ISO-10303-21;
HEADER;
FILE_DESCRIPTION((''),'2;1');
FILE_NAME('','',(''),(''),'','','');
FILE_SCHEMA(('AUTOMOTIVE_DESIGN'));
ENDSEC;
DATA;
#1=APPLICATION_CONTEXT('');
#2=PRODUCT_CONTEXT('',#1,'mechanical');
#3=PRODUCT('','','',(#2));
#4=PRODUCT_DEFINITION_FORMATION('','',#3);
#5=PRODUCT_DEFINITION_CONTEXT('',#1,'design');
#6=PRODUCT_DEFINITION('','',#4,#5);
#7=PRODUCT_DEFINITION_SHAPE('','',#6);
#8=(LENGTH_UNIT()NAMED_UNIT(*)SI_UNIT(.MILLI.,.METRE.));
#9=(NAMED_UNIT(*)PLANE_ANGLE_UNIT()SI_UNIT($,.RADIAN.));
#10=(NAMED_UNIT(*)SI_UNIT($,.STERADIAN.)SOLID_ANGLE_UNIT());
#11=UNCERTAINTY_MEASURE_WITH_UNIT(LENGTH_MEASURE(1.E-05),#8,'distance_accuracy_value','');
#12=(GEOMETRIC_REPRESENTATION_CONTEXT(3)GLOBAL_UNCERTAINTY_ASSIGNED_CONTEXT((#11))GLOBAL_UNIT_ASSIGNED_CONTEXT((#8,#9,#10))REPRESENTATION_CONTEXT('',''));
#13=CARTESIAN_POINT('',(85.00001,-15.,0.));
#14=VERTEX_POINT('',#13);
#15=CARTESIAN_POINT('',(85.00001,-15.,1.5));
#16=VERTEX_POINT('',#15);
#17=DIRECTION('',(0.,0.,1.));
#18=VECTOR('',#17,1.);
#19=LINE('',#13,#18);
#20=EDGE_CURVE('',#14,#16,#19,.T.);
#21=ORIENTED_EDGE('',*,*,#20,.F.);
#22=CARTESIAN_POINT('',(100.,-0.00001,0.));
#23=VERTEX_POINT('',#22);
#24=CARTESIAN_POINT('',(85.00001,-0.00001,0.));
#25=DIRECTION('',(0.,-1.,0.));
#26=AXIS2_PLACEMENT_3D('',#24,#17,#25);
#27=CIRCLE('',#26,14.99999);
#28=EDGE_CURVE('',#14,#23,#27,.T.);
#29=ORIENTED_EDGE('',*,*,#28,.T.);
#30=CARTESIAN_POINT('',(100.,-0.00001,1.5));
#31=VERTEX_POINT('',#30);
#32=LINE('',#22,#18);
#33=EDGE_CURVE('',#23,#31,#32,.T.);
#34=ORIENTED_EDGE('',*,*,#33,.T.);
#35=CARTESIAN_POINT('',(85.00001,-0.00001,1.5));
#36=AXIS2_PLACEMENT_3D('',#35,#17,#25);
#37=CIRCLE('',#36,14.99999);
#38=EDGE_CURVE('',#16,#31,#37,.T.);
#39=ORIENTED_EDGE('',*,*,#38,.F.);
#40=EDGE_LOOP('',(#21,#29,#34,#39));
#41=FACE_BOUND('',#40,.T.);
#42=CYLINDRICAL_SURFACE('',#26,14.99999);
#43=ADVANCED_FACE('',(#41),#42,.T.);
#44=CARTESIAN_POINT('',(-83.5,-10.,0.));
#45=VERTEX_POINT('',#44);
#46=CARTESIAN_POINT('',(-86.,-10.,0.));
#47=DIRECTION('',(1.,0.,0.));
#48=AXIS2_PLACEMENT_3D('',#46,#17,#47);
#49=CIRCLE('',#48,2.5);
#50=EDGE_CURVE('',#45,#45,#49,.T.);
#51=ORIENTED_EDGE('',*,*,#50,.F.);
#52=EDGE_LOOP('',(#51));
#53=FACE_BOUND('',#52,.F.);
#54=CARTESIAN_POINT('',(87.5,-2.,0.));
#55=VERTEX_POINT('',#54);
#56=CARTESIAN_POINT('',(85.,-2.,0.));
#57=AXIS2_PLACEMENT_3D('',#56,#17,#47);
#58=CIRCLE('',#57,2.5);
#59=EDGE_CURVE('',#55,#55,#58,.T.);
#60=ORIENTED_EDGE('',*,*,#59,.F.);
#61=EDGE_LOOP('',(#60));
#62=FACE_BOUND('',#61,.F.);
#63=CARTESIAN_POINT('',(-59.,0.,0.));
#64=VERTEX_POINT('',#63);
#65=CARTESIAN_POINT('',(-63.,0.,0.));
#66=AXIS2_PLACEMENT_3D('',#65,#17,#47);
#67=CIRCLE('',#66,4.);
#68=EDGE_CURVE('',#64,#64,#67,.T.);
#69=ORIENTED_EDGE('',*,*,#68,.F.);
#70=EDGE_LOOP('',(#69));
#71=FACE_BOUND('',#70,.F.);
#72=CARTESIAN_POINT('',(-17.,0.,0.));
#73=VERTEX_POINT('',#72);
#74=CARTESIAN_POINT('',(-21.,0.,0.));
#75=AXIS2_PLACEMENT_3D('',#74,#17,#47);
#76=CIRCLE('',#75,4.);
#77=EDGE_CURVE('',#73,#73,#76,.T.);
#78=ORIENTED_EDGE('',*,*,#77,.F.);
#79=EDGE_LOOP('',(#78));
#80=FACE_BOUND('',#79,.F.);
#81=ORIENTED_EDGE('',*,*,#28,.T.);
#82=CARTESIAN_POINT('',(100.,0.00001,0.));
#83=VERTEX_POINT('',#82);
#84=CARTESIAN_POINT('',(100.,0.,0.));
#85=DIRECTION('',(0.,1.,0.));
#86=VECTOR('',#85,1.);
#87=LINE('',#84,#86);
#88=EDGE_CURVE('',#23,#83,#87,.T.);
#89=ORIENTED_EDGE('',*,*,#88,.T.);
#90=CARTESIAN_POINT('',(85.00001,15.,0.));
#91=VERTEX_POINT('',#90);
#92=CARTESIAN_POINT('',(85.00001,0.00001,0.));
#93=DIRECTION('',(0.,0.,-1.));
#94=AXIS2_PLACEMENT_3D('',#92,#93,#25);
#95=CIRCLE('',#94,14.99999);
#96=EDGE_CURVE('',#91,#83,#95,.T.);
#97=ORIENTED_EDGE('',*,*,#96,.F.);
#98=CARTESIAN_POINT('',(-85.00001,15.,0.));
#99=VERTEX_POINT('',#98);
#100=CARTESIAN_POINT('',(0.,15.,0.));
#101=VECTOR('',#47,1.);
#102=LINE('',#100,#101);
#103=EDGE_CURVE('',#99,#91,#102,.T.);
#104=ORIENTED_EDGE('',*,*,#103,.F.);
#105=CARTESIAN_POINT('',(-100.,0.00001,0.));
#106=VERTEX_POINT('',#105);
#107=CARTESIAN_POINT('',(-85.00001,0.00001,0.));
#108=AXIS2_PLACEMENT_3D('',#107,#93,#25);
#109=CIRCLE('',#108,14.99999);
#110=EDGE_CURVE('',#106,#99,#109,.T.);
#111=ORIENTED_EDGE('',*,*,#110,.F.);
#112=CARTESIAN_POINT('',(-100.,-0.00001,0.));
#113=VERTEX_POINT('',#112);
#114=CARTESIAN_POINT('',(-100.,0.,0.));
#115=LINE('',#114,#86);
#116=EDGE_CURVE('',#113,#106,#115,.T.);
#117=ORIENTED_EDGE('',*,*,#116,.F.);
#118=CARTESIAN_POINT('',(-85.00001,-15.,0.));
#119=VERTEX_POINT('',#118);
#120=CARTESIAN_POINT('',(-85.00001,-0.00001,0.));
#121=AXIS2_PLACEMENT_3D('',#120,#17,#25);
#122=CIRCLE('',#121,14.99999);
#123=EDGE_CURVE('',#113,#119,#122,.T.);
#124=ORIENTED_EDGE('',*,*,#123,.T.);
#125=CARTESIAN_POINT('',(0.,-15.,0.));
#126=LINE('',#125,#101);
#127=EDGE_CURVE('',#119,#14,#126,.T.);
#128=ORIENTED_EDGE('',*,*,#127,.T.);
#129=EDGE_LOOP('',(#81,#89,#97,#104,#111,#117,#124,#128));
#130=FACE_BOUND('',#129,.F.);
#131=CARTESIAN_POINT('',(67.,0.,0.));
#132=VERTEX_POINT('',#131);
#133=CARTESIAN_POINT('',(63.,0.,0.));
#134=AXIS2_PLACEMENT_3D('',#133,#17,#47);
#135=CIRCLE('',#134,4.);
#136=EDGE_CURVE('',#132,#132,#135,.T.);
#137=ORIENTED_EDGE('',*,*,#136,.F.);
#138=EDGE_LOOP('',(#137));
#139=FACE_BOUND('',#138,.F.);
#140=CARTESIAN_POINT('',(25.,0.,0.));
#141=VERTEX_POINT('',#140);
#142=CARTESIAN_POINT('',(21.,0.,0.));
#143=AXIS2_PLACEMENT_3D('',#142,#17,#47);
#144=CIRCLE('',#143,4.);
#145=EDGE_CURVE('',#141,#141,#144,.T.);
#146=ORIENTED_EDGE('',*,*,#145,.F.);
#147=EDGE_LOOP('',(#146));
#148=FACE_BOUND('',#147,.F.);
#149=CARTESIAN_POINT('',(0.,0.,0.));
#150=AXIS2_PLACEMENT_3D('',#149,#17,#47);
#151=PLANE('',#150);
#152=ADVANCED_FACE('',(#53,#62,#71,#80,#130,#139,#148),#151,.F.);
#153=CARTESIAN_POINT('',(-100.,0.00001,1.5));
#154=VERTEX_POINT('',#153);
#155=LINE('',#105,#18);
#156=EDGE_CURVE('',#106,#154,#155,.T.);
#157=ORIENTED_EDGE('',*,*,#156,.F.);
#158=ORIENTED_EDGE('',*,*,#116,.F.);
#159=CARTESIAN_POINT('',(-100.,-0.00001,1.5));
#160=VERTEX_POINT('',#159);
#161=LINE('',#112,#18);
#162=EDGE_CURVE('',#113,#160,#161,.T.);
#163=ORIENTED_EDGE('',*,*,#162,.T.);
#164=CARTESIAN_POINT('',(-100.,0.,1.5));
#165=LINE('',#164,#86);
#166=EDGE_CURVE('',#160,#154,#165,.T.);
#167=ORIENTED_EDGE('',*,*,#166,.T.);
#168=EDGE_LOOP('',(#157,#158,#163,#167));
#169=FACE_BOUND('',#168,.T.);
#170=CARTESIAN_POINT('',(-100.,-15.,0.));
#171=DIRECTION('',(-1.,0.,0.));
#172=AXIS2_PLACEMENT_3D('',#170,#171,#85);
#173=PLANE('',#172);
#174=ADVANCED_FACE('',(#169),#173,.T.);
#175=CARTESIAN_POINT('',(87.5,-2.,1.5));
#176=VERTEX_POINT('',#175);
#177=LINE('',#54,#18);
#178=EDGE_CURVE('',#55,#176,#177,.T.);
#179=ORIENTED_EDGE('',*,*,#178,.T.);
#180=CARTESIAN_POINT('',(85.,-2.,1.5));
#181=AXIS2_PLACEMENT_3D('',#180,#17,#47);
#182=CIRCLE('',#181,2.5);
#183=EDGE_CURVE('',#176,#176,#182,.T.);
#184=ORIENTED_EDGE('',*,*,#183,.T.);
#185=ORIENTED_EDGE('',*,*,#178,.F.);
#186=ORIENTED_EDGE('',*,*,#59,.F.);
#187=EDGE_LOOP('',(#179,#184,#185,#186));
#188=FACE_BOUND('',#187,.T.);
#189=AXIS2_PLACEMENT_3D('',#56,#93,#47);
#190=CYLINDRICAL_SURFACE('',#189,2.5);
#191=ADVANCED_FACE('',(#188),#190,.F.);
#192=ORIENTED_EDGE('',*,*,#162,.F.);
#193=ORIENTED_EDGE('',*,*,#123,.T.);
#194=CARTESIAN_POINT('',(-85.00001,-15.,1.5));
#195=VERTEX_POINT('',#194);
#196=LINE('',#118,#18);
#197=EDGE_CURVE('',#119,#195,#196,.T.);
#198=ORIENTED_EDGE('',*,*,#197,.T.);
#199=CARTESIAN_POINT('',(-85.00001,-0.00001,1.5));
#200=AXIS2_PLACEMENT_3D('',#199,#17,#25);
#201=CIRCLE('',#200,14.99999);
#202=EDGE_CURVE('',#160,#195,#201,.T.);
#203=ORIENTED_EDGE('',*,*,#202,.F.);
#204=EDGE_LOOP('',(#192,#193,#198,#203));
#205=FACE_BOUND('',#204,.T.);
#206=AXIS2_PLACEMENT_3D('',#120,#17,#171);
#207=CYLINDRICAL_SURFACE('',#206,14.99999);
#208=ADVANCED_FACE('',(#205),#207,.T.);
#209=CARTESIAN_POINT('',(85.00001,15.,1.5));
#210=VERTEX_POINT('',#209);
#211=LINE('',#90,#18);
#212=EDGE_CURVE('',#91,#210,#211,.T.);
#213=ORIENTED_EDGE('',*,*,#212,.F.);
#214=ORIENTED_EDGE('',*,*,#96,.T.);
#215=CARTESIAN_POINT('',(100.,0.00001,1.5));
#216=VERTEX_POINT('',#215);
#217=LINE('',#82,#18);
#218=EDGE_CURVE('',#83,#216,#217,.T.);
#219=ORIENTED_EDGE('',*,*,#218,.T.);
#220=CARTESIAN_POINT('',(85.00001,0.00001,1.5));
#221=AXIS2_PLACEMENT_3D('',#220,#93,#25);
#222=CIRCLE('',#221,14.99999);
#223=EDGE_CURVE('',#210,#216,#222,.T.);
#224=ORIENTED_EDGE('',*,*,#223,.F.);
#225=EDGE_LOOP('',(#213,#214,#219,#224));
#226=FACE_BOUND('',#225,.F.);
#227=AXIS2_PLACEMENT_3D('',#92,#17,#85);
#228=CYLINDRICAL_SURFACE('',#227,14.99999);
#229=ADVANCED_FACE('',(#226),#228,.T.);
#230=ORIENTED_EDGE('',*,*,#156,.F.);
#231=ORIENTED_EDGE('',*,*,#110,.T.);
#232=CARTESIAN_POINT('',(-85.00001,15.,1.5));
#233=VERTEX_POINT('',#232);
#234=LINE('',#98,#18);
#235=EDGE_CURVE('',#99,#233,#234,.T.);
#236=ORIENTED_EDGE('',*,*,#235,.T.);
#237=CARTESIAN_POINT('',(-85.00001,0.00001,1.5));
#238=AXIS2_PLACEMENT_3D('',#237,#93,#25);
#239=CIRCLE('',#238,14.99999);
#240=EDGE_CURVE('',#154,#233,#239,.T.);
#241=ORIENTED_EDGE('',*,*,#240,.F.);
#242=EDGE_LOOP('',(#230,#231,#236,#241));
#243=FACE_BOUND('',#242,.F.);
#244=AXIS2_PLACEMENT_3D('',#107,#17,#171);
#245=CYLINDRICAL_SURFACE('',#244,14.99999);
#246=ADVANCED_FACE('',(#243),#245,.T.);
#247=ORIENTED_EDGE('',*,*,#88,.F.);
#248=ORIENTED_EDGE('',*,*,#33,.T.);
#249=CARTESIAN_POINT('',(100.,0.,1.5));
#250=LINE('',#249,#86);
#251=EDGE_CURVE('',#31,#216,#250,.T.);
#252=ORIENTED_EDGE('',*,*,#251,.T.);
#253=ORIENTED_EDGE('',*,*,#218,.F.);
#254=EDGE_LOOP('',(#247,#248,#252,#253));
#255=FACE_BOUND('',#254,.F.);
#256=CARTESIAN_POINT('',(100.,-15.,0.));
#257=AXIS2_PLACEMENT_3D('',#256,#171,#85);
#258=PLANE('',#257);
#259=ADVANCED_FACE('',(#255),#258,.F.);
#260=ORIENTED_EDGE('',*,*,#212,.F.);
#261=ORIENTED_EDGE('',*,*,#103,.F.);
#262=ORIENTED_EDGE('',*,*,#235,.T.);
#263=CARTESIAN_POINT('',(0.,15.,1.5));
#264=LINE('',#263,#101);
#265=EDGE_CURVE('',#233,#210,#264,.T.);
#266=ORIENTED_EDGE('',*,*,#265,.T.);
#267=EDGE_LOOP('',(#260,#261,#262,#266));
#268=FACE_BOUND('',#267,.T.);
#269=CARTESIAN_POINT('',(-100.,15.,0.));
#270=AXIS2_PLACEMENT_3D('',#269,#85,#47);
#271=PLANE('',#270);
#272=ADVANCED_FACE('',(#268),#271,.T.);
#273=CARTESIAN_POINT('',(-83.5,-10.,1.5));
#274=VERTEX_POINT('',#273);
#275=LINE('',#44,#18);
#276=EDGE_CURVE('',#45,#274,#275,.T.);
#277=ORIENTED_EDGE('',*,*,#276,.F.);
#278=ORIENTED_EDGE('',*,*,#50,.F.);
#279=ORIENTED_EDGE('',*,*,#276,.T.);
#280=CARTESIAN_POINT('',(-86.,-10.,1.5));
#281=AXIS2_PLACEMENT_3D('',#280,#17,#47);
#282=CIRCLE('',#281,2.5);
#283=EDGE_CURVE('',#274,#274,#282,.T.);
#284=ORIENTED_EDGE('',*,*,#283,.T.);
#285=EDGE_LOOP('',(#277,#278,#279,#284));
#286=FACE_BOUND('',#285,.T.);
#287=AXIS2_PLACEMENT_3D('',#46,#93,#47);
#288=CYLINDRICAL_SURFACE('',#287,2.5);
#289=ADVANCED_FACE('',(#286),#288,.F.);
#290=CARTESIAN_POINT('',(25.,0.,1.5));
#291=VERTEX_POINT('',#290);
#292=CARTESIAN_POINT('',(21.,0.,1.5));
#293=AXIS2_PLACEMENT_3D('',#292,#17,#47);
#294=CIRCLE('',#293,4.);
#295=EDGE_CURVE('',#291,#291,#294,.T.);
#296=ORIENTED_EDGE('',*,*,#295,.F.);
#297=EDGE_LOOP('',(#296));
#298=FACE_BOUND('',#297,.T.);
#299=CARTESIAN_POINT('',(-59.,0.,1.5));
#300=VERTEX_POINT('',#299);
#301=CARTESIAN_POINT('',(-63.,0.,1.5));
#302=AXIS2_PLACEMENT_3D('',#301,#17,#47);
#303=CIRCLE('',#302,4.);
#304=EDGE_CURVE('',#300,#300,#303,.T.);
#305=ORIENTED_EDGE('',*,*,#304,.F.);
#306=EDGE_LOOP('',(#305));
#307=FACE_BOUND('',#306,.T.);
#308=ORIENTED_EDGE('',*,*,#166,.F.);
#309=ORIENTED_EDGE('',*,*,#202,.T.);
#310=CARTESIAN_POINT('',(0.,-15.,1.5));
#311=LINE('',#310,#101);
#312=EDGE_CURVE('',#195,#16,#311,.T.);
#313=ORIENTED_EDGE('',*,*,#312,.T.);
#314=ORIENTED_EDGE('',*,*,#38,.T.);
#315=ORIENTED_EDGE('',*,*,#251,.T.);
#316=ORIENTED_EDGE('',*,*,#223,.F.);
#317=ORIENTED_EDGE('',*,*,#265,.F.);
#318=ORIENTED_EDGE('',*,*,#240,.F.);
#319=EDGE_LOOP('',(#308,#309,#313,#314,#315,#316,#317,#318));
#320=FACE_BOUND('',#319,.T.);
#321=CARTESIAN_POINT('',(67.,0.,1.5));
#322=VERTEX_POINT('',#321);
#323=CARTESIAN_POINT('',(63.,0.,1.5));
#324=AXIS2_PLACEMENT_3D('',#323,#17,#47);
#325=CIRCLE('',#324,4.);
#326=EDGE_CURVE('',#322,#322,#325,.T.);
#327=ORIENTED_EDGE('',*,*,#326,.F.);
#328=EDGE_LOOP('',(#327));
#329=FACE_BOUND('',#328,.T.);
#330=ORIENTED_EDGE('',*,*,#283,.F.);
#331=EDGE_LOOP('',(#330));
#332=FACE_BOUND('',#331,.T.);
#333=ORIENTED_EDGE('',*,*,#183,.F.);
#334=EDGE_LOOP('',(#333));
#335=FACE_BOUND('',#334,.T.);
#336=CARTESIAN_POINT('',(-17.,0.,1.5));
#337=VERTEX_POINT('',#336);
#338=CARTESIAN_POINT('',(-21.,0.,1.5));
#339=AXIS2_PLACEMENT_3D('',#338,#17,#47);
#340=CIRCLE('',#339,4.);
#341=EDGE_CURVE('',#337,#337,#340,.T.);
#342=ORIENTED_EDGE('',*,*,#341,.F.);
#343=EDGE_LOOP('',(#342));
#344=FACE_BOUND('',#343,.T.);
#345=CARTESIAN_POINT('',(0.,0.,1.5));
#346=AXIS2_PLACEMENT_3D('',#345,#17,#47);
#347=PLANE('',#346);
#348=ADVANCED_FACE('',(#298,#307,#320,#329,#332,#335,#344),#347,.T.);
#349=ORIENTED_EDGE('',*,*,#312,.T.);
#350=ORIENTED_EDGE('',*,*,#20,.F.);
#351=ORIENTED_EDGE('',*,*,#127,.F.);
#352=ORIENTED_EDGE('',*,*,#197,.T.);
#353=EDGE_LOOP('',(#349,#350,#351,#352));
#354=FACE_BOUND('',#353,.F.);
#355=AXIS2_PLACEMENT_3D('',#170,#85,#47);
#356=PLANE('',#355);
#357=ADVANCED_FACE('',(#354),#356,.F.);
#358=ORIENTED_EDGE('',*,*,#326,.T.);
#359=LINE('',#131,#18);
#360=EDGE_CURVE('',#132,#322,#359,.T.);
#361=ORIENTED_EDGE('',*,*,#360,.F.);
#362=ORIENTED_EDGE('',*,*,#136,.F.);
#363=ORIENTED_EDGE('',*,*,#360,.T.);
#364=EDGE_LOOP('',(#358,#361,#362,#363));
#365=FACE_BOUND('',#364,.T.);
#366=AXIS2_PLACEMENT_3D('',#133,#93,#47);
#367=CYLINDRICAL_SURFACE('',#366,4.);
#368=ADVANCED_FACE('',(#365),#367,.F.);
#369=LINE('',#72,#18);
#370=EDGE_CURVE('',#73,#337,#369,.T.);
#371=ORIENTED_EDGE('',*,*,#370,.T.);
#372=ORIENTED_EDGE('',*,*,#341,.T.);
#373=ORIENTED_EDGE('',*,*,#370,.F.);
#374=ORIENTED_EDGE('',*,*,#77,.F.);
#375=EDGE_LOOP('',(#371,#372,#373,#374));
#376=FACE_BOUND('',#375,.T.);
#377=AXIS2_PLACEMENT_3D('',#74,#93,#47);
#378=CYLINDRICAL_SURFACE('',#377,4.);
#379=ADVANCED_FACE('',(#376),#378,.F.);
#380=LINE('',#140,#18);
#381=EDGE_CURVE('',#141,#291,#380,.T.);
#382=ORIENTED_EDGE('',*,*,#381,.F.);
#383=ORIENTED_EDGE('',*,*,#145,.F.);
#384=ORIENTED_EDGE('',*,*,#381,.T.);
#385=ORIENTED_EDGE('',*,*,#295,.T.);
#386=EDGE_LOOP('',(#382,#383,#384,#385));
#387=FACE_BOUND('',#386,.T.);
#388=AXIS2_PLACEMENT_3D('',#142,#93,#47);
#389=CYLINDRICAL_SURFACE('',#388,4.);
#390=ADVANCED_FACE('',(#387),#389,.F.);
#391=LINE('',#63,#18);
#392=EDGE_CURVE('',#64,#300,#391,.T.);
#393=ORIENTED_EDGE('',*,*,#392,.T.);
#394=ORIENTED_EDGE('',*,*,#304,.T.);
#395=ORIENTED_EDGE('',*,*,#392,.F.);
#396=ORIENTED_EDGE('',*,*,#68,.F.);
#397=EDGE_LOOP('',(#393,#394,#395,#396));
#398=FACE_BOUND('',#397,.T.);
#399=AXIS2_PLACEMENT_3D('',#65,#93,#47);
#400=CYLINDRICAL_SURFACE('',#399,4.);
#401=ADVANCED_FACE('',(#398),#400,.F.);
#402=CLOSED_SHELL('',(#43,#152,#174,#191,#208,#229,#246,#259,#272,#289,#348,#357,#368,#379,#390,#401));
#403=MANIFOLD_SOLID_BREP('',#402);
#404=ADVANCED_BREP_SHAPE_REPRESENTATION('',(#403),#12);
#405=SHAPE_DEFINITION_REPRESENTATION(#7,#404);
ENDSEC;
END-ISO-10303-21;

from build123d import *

# Parameters (mm, degrees)
F0_W     = 200
F0_H     = 30
F0_R     = 2.5
F0_R_2   = 4
F1_DEPTH = 1.5
F2_R     = 14.99999


# Not quite as in the source:
# - a fillet or chamfer is up to 0.001 mm smaller than in the source, because OpenCascade refuses the exact size


with BuildPart() as f1:
    # F0 (on Top) → F1 (new body)
    with BuildSketch(Plane.XY):
        Rectangle(F0_W, F0_H)
        with Locations((-86, -10)):
            Circle(F0_R, mode=Mode.SUBTRACT)
        with Locations((85, -2)):
            Circle(F0_R, mode=Mode.SUBTRACT)
        with Locations((-63, 0)):
            Circle(F0_R_2, mode=Mode.SUBTRACT)
        with Locations((-21, 0)):
            Circle(F0_R_2, mode=Mode.SUBTRACT)
        with Locations((21, 0)):
            Circle(F0_R_2, mode=Mode.SUBTRACT)
        with Locations((63, 0)):
            Circle(F0_R_2, mode=Mode.SUBTRACT)
    extrude(amount=F1_DEPTH)

    # F2 (radius 15 in the source; OpenCascade refuses exactly that, so slightly less here)
    f2_edges = [f1.edges().sort_by_distance(p)[0] for p in [
        (-100, -15, 0.75),
        (-100, 15, 0.75),
        (100, -15, 0.75),
        (100, 15, 0.75),
    ]]
    fillet(f2_edges, radius=F2_R)


solid = f1.part
